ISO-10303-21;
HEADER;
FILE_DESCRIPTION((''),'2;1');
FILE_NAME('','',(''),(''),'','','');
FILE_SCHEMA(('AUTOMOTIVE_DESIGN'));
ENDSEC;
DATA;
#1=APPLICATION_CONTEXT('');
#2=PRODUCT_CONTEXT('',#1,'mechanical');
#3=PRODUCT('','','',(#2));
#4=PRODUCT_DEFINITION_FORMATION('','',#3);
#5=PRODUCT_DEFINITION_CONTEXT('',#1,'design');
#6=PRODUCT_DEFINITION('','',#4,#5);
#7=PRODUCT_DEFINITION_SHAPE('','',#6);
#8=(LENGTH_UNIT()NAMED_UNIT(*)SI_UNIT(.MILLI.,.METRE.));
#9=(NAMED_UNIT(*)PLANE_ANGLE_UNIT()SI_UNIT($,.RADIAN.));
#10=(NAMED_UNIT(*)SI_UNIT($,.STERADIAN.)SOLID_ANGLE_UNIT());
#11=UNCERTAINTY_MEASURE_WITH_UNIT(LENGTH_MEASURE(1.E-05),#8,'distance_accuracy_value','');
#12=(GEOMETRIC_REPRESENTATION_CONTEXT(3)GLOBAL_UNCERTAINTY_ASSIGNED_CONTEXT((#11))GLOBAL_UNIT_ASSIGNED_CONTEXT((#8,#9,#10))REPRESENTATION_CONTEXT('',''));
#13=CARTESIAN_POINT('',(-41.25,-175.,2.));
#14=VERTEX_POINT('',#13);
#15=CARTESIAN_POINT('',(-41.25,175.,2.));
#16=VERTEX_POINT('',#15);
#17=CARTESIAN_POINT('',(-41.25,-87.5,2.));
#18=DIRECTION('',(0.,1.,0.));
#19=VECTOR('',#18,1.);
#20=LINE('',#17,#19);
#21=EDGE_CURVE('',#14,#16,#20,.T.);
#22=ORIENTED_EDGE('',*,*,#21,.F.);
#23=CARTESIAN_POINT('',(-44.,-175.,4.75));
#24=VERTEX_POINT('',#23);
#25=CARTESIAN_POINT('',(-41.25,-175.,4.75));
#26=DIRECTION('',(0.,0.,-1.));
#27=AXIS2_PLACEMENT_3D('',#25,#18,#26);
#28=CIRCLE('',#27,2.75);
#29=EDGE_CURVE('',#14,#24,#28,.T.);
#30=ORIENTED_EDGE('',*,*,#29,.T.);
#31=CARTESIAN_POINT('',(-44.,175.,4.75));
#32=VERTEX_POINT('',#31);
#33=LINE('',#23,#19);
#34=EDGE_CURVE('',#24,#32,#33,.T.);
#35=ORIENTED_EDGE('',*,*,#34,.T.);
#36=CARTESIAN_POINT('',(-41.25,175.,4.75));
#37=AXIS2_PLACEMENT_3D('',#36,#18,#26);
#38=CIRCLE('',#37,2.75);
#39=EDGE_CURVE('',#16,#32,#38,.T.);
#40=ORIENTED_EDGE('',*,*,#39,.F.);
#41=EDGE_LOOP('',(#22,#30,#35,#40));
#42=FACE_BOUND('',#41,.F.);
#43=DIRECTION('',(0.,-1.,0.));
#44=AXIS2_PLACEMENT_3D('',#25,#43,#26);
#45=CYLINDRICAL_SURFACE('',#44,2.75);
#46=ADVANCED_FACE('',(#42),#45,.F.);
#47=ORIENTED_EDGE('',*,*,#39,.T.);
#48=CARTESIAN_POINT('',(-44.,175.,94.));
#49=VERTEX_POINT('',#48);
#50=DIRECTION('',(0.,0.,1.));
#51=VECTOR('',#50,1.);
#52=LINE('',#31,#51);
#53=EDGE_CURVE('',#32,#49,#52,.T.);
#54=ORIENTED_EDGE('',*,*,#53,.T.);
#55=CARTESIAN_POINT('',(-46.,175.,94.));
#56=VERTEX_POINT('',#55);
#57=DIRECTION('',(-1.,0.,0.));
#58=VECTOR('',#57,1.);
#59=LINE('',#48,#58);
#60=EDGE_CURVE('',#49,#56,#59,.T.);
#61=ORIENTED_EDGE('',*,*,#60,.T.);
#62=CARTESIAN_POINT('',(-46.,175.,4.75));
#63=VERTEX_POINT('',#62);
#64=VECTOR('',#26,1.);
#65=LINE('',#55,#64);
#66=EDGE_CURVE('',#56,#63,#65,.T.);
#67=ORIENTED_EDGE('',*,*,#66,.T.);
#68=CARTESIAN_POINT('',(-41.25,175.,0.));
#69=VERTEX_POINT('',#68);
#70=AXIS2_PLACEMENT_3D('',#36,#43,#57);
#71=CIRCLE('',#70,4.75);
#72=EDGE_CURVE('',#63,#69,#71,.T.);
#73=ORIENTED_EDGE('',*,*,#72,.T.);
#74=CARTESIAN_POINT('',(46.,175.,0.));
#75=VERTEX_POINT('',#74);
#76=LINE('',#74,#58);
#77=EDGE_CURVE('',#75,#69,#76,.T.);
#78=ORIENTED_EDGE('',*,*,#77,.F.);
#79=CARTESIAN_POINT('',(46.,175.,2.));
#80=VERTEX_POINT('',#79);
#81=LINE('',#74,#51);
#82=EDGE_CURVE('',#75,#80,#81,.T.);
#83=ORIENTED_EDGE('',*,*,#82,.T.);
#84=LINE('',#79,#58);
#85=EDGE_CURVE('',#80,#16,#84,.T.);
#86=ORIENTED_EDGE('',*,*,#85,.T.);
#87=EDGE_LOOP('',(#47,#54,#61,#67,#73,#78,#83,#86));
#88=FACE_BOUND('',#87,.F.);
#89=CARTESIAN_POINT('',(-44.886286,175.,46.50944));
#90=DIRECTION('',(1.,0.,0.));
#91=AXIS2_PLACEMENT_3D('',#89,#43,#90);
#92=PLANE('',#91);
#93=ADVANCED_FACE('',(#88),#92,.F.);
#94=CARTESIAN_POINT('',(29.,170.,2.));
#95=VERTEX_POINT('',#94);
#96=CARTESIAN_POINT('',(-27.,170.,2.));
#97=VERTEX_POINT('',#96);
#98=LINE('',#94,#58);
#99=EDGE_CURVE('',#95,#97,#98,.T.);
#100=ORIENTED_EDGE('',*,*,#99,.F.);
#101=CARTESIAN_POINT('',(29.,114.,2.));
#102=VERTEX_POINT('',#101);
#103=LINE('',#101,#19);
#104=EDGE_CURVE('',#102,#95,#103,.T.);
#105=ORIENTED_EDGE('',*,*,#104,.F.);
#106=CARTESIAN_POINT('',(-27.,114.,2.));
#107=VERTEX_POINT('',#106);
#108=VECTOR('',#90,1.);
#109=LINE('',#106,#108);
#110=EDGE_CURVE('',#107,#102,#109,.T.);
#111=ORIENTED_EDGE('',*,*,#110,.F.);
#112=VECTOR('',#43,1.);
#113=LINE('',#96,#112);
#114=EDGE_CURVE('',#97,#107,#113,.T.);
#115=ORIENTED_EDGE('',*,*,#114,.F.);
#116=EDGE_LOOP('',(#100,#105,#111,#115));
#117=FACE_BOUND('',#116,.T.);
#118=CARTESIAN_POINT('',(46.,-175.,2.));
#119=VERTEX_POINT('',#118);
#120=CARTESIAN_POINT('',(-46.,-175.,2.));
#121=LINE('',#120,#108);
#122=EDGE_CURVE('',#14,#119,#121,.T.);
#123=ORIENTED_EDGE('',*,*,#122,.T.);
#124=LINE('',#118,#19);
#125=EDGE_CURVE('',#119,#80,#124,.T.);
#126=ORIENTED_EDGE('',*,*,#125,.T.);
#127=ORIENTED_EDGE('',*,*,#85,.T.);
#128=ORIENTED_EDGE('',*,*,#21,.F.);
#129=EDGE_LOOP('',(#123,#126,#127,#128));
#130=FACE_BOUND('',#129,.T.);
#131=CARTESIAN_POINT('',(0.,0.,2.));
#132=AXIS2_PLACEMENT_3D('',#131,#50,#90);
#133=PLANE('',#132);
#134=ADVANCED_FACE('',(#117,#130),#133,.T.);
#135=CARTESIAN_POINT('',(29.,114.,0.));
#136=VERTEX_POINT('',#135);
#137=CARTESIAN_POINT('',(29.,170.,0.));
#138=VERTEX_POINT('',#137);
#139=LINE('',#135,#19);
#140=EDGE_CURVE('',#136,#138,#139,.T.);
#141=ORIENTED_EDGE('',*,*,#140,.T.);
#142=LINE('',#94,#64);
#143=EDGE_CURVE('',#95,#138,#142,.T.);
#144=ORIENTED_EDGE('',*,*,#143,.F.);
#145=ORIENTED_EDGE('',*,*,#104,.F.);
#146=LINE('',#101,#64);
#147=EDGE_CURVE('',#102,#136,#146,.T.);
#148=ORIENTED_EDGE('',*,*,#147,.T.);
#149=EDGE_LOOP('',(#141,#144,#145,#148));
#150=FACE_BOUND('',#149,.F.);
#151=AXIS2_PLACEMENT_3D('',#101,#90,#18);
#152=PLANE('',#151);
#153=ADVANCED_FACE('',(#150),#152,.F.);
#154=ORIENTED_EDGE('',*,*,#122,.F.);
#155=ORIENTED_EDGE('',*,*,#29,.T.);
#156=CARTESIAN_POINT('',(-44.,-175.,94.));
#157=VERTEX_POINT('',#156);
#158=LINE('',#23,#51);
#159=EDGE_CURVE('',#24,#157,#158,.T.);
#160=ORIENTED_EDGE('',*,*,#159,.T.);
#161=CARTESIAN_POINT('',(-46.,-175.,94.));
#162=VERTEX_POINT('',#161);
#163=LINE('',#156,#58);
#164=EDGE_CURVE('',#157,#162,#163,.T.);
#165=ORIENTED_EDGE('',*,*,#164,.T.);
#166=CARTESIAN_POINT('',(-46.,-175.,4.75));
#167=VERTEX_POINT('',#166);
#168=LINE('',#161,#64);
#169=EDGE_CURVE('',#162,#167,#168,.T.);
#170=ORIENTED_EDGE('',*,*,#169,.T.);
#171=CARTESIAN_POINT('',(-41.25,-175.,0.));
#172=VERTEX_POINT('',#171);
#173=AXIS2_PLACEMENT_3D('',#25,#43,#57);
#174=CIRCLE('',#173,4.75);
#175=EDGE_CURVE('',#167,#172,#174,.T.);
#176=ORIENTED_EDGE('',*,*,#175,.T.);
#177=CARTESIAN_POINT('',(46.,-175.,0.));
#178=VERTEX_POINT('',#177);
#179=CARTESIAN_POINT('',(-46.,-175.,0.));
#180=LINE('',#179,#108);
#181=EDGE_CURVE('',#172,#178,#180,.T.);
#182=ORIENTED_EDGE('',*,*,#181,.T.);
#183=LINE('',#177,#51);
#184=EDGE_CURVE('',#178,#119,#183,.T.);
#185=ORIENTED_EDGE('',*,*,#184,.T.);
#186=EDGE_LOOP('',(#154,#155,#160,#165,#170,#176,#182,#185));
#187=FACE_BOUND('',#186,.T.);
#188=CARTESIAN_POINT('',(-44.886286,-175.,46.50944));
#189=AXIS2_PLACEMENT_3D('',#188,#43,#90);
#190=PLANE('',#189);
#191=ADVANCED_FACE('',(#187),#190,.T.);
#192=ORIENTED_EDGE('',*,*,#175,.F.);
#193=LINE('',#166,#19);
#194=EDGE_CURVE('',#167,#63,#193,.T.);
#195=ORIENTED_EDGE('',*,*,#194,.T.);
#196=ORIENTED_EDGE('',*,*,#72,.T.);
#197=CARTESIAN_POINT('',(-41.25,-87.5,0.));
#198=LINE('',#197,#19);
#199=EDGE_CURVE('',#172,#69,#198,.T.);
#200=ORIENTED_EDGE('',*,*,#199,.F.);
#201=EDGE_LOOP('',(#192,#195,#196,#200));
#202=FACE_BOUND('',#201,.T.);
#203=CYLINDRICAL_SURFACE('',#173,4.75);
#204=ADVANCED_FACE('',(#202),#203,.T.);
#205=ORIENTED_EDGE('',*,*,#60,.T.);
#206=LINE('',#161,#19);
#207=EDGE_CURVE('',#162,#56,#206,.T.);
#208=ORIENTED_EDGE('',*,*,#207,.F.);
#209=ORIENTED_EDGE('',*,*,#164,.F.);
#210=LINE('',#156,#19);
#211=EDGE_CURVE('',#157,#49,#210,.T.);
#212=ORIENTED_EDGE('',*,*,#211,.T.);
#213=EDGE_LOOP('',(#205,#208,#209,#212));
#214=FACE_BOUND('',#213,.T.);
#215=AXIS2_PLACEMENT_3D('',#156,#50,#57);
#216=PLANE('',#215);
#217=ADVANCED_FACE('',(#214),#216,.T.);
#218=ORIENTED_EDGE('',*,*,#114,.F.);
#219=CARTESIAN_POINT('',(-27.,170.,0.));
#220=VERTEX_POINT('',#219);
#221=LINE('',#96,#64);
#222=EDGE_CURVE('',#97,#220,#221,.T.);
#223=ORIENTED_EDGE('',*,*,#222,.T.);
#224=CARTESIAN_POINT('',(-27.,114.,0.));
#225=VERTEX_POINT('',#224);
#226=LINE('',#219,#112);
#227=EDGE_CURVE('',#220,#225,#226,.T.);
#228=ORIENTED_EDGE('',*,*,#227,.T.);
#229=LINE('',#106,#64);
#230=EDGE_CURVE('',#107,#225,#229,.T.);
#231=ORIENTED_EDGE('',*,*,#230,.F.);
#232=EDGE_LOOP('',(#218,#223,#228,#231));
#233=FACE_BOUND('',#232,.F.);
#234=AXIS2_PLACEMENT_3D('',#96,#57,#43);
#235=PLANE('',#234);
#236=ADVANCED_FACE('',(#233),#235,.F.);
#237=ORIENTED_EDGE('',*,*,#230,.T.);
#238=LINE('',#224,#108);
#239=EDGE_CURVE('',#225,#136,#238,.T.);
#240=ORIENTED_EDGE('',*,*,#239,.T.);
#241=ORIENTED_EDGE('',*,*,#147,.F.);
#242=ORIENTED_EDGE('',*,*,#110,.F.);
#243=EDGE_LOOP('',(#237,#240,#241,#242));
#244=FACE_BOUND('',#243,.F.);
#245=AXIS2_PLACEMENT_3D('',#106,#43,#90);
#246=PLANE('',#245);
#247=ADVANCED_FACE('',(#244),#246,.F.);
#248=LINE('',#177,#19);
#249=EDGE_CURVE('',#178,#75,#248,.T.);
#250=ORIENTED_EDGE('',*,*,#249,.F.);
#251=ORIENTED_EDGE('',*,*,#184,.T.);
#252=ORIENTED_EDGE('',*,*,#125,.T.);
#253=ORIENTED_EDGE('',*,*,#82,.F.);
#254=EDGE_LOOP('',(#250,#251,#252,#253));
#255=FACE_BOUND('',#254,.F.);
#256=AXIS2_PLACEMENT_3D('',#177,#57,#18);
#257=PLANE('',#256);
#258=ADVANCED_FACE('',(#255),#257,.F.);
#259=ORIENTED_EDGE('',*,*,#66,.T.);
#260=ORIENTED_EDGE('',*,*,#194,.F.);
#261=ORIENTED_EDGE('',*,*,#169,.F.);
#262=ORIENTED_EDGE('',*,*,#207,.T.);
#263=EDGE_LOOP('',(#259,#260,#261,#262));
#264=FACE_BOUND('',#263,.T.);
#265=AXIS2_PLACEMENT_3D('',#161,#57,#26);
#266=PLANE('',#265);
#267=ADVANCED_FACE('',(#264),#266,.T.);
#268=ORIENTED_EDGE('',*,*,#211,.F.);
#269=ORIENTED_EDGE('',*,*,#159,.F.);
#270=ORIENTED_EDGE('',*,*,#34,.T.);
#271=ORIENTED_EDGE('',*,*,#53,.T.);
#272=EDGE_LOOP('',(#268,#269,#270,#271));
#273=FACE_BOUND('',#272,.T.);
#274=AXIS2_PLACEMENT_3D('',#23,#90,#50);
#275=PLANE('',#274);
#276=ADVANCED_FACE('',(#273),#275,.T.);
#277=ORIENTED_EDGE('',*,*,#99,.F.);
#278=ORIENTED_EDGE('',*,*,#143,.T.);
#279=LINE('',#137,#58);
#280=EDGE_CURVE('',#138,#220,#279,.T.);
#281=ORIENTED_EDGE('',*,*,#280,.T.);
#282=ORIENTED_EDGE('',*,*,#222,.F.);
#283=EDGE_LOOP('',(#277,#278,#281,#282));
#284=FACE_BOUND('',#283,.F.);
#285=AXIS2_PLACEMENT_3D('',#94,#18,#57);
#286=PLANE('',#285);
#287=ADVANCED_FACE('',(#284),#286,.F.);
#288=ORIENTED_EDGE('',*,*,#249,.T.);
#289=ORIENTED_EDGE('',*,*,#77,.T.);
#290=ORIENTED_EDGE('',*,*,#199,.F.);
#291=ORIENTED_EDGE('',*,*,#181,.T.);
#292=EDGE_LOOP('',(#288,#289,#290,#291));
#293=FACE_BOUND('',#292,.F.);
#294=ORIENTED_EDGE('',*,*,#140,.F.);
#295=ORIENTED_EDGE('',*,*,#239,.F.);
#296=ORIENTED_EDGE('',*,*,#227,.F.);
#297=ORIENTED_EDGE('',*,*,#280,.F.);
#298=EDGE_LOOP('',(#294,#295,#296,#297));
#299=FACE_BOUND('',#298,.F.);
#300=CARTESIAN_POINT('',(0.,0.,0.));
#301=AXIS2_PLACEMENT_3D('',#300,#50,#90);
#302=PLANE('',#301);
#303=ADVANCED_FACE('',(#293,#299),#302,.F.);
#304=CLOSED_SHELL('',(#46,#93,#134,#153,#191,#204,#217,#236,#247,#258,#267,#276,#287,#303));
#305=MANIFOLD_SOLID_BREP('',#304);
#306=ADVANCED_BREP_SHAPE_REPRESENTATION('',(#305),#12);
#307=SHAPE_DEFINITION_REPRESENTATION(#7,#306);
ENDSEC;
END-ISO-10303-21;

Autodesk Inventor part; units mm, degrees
ref_plane "YZ Plane" through (0, 0, 0) normal (1, 0, 0) x (0, 1, 0)
ref_plane "XZ Plane" through (0, 0, 0) normal (0, 1, 0) x (-1, 0, 0)
ref_plane "XY Plane" through (0, 0, 0) normal (0, 0, 1) x (1, 0, 0)
sketch "Sketch1" plane through (0, 0, 0) normal (0, 0, 1) x (1, 0, 0)
  line L0 (-46, -175) -> (46, -175)
  line L1 (46, -175) -> (46, 175)
  line L2 (46, 175) -> (-46, 175)
  line L3 (-46, 175) -> (-46, -175)
  line L4 (-46, -175) -> (46, 175) construction
  line L5 (46, -175) -> (-46, 175) construction
  point P0 (0, 0)
  dimension "d154" = 92
  dimension "d155" = 350
extrude "Plate5" add sketch "Sketch1" along normal blind 2
sketch "Sketch7" plane through (-44, -175, 0) normal (-1, 0, 0) x (0, -1, 0)
  line L0 (-350, 0) -> (0, 0)
  line L1 (0, 0) -> (0, 94)
  line L2 (0, 94) -> (-350, 94)
  line L3 (-350, 94) -> (-350, 0)
edge flange "Flange3" height 94 angle 90 thickness 2 bend radius 2.75 thickness toward (-1, 0, 0) relief round relief width 2 relief depth 1 edges at (-46, 0, 2) wall of the first edge with corners at (-44, 175, 0) (-44, -175, 0) (-44, -175, 94) (-44, 175, 94)
bend "Bend3"
corner "Corner3"
sketch "Sketch8" plane through (0, 0, 2) normal (0, 0, 1) x (1, 0, 0)
  line L0 (46, 175) -> (46, -175) projected
  line L1 (-41.25, 175) -> (46, 175) projected
  line L2 (29, 170) -> (-27, 170)
  line L3 (-27, 170) -> (-27, 114)
  line L4 (-27, 114) -> (29, 114)
  line L5 (29, 114) -> (29, 170)
  line L6 (29, 170) -> (-27, 114) construction
  line L7 (-27, 170) -> (29, 114) construction
  point P0 (0, 0)
  point P1 (1, 142)
  point P2 (2.375, 175)
  dimension "d167" = 56
  dimension "d168" = 56
  dimension "d169" = 5
  dimension "d172" = 17
extrude "Cut1" cut sketch "Sketch8" against normal blind 2
properties part number "TZS 752 FDS 940 FLANGE 2" material "Stainless Steel"
